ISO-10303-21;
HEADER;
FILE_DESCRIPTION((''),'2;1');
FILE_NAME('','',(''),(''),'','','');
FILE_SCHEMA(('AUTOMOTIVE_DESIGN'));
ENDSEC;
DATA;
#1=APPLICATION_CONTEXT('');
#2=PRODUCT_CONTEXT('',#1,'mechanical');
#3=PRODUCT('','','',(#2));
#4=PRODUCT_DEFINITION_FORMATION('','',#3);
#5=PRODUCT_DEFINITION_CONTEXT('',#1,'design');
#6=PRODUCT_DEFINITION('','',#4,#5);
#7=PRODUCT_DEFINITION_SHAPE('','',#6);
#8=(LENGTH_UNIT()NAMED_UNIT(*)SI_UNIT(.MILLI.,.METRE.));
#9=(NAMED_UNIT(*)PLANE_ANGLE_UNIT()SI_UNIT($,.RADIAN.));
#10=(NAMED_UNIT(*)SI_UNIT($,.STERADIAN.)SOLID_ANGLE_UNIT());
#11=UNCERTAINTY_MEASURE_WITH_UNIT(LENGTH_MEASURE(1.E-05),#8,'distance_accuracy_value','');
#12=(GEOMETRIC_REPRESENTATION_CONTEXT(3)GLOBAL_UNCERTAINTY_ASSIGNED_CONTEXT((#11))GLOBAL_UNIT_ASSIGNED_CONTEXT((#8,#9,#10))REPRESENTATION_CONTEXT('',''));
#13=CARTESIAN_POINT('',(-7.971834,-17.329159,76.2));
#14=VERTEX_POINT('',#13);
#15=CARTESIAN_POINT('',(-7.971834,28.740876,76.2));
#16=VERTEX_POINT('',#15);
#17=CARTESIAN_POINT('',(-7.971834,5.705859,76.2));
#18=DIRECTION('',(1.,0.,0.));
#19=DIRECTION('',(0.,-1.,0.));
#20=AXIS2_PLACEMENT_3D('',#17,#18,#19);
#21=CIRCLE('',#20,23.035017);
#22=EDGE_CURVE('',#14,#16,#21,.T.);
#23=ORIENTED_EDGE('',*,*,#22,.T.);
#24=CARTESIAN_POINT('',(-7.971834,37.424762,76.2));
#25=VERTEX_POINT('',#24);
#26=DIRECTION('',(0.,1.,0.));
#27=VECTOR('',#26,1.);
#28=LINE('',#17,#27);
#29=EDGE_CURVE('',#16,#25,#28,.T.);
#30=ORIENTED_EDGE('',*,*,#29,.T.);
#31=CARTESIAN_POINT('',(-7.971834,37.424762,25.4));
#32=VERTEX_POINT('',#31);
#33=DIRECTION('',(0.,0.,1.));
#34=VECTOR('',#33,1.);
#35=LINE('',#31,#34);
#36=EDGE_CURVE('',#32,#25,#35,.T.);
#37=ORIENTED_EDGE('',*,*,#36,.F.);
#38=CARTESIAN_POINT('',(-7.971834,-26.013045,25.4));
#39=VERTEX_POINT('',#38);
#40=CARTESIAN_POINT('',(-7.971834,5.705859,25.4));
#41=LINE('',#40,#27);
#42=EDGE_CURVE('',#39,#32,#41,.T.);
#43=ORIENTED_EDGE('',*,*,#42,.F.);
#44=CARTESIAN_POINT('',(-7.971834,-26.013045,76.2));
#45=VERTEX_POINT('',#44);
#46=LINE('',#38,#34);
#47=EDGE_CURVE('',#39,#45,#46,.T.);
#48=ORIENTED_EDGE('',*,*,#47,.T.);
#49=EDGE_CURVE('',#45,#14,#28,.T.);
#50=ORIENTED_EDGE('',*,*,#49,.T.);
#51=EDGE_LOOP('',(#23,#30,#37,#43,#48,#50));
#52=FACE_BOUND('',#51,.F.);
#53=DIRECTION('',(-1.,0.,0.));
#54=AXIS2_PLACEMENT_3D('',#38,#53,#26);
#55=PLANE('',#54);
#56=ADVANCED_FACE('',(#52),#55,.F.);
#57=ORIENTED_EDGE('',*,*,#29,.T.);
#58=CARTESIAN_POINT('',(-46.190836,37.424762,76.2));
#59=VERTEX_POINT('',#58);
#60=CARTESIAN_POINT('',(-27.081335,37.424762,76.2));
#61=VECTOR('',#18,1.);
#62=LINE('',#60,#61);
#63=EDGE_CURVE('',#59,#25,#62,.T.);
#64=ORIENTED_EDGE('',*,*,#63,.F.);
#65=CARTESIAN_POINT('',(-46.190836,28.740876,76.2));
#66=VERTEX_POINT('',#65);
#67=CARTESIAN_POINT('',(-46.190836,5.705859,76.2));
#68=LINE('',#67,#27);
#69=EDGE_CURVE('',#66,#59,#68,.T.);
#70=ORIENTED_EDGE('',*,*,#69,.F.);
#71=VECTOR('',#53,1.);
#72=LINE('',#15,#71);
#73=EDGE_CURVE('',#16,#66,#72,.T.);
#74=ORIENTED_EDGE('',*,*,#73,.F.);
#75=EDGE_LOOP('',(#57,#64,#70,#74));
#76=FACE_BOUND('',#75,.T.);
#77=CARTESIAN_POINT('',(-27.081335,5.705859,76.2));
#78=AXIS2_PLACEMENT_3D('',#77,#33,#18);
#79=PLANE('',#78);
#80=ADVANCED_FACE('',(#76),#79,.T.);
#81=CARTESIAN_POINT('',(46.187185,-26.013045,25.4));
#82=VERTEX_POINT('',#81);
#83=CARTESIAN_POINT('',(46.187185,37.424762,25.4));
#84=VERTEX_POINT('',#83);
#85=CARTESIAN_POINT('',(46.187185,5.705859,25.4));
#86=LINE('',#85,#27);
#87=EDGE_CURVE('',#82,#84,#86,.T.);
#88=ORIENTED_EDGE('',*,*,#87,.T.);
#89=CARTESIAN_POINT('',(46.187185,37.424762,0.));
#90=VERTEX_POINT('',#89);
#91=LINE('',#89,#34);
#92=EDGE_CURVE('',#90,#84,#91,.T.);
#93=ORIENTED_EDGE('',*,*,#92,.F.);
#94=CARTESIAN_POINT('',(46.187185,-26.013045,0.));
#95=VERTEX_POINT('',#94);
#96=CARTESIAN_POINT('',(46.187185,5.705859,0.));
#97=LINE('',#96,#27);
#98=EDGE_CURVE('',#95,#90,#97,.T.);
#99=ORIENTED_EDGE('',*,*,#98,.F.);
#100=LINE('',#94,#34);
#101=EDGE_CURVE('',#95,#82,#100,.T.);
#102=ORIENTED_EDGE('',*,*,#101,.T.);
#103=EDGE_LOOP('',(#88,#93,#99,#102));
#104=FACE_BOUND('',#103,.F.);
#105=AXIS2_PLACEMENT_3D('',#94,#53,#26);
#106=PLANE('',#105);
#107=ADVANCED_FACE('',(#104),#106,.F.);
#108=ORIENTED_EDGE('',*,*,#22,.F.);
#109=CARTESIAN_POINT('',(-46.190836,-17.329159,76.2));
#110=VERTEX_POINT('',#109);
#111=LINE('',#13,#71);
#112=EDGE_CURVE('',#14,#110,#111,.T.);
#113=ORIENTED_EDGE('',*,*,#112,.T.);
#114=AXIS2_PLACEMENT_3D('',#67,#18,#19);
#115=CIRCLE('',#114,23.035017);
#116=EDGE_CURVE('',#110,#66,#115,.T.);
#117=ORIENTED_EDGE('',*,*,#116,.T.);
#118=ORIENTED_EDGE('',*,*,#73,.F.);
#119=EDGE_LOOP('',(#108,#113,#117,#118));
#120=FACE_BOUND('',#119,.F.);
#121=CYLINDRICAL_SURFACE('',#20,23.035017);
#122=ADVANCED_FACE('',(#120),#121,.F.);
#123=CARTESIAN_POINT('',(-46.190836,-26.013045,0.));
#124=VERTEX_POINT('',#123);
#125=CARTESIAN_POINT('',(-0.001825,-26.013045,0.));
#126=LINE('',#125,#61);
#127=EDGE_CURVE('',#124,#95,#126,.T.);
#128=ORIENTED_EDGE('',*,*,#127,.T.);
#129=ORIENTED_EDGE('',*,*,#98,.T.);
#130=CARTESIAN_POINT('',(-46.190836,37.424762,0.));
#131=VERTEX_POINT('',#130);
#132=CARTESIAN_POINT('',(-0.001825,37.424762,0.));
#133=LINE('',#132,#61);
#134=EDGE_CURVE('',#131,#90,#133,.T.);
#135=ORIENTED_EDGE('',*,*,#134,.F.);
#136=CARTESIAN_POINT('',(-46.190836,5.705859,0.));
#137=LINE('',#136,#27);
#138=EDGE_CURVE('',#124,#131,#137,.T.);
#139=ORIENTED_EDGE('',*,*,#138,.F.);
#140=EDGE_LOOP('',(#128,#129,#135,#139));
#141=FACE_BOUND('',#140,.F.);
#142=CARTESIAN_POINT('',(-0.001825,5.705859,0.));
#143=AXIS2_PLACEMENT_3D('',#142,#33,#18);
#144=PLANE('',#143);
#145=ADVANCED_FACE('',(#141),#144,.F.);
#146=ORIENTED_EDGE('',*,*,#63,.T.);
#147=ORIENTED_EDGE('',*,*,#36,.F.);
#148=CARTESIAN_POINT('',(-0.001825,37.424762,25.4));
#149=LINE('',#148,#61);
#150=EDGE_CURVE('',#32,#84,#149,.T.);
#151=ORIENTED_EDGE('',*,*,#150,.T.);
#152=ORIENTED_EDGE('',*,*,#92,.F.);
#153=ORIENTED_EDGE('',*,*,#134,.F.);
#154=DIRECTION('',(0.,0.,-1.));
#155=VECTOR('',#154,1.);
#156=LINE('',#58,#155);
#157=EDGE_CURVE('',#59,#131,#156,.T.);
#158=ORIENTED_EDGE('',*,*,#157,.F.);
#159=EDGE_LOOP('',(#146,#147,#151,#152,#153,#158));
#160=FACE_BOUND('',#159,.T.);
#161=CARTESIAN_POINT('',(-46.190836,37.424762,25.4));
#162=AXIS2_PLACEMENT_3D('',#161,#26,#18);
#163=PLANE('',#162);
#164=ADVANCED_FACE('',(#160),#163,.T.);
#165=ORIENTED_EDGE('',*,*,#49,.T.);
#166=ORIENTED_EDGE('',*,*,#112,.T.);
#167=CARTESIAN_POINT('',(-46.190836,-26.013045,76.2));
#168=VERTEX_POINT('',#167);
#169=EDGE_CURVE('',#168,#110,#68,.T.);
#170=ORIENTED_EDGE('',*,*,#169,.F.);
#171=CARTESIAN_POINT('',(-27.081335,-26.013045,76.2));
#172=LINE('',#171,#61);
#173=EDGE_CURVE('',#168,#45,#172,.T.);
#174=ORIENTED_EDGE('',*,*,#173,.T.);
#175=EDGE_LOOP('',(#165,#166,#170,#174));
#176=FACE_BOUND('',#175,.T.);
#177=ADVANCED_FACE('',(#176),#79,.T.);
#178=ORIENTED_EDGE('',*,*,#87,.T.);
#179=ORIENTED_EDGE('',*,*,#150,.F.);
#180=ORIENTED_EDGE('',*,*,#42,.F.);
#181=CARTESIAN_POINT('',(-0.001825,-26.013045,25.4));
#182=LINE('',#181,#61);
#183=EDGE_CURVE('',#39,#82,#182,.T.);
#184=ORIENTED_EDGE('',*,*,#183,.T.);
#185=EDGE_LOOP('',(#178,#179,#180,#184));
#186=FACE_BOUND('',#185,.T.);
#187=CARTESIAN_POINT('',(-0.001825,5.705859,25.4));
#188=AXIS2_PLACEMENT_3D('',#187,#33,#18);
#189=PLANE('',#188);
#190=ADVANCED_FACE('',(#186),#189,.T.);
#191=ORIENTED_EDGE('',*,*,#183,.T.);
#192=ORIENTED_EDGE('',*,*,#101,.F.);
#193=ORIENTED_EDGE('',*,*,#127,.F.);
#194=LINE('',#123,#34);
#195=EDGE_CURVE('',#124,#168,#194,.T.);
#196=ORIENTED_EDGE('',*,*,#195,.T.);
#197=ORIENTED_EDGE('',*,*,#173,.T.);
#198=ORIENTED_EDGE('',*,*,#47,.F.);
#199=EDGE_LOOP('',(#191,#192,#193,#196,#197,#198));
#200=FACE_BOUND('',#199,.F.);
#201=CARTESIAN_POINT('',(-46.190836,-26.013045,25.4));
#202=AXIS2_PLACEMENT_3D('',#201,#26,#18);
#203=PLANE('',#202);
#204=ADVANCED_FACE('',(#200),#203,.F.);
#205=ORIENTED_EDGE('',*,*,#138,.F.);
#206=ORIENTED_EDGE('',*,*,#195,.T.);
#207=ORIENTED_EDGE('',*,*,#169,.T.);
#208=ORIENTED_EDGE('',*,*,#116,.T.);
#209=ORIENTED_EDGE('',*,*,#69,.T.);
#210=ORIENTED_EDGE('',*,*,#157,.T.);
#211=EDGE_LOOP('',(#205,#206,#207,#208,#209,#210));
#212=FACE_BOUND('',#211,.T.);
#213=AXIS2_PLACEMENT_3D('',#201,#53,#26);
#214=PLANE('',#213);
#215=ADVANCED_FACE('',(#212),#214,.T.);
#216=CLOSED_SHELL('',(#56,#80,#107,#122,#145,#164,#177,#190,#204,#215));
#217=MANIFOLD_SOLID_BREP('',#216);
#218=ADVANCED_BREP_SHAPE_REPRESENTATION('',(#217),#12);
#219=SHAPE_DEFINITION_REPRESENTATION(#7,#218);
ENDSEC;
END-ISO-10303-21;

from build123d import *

# Parameters (mm, degrees)
F0_W     = 92.3780202866
F0_H     = 63.4378064424
F1_DEPTH = 25.4
F2_W     = 38.2190011442
F2_H     = 63.4378064424
F3_DEPTH = 50.8
F7_DEPTH = 50.8


# Not quite as in the source:
# - the program builds the solid bodies; features that only make, move or delete a surface that nothing else refers to are left out


with BuildPart() as f1:
    # F0 (on Top) → F1 (new body)
    with BuildSketch(Plane.XY):
        with Locations((-0.0018253922, 5.7058585808)):
            Rectangle(F0_W, F0_H)
    extrude(amount=F1_DEPTH)

    # F2 (on face) → F3 (join)
    with BuildSketch(Plane.XY.offset(25.4)):
        with Locations((-27.0813349634, 5.7058585808)):
            Rectangle(F2_W, F2_H)
    extrude(amount=F3_DEPTH)

    # F6 (on face) → F7 (cut)
    with BuildSketch(Plane.YZ.offset(-7.9718343914)):
        with BuildLine():
            ThreePointArc((-17.3291587886, 76.2), (5.7058585808, 53.1649826306), (28.7408759501, 76.2))
            Line((28.7408759501, 76.2), (-17.3291587886, 76.2))
        make_face()
    extrude(amount=-F7_DEPTH, mode=Mode.SUBTRACT)


solid = f1.part
